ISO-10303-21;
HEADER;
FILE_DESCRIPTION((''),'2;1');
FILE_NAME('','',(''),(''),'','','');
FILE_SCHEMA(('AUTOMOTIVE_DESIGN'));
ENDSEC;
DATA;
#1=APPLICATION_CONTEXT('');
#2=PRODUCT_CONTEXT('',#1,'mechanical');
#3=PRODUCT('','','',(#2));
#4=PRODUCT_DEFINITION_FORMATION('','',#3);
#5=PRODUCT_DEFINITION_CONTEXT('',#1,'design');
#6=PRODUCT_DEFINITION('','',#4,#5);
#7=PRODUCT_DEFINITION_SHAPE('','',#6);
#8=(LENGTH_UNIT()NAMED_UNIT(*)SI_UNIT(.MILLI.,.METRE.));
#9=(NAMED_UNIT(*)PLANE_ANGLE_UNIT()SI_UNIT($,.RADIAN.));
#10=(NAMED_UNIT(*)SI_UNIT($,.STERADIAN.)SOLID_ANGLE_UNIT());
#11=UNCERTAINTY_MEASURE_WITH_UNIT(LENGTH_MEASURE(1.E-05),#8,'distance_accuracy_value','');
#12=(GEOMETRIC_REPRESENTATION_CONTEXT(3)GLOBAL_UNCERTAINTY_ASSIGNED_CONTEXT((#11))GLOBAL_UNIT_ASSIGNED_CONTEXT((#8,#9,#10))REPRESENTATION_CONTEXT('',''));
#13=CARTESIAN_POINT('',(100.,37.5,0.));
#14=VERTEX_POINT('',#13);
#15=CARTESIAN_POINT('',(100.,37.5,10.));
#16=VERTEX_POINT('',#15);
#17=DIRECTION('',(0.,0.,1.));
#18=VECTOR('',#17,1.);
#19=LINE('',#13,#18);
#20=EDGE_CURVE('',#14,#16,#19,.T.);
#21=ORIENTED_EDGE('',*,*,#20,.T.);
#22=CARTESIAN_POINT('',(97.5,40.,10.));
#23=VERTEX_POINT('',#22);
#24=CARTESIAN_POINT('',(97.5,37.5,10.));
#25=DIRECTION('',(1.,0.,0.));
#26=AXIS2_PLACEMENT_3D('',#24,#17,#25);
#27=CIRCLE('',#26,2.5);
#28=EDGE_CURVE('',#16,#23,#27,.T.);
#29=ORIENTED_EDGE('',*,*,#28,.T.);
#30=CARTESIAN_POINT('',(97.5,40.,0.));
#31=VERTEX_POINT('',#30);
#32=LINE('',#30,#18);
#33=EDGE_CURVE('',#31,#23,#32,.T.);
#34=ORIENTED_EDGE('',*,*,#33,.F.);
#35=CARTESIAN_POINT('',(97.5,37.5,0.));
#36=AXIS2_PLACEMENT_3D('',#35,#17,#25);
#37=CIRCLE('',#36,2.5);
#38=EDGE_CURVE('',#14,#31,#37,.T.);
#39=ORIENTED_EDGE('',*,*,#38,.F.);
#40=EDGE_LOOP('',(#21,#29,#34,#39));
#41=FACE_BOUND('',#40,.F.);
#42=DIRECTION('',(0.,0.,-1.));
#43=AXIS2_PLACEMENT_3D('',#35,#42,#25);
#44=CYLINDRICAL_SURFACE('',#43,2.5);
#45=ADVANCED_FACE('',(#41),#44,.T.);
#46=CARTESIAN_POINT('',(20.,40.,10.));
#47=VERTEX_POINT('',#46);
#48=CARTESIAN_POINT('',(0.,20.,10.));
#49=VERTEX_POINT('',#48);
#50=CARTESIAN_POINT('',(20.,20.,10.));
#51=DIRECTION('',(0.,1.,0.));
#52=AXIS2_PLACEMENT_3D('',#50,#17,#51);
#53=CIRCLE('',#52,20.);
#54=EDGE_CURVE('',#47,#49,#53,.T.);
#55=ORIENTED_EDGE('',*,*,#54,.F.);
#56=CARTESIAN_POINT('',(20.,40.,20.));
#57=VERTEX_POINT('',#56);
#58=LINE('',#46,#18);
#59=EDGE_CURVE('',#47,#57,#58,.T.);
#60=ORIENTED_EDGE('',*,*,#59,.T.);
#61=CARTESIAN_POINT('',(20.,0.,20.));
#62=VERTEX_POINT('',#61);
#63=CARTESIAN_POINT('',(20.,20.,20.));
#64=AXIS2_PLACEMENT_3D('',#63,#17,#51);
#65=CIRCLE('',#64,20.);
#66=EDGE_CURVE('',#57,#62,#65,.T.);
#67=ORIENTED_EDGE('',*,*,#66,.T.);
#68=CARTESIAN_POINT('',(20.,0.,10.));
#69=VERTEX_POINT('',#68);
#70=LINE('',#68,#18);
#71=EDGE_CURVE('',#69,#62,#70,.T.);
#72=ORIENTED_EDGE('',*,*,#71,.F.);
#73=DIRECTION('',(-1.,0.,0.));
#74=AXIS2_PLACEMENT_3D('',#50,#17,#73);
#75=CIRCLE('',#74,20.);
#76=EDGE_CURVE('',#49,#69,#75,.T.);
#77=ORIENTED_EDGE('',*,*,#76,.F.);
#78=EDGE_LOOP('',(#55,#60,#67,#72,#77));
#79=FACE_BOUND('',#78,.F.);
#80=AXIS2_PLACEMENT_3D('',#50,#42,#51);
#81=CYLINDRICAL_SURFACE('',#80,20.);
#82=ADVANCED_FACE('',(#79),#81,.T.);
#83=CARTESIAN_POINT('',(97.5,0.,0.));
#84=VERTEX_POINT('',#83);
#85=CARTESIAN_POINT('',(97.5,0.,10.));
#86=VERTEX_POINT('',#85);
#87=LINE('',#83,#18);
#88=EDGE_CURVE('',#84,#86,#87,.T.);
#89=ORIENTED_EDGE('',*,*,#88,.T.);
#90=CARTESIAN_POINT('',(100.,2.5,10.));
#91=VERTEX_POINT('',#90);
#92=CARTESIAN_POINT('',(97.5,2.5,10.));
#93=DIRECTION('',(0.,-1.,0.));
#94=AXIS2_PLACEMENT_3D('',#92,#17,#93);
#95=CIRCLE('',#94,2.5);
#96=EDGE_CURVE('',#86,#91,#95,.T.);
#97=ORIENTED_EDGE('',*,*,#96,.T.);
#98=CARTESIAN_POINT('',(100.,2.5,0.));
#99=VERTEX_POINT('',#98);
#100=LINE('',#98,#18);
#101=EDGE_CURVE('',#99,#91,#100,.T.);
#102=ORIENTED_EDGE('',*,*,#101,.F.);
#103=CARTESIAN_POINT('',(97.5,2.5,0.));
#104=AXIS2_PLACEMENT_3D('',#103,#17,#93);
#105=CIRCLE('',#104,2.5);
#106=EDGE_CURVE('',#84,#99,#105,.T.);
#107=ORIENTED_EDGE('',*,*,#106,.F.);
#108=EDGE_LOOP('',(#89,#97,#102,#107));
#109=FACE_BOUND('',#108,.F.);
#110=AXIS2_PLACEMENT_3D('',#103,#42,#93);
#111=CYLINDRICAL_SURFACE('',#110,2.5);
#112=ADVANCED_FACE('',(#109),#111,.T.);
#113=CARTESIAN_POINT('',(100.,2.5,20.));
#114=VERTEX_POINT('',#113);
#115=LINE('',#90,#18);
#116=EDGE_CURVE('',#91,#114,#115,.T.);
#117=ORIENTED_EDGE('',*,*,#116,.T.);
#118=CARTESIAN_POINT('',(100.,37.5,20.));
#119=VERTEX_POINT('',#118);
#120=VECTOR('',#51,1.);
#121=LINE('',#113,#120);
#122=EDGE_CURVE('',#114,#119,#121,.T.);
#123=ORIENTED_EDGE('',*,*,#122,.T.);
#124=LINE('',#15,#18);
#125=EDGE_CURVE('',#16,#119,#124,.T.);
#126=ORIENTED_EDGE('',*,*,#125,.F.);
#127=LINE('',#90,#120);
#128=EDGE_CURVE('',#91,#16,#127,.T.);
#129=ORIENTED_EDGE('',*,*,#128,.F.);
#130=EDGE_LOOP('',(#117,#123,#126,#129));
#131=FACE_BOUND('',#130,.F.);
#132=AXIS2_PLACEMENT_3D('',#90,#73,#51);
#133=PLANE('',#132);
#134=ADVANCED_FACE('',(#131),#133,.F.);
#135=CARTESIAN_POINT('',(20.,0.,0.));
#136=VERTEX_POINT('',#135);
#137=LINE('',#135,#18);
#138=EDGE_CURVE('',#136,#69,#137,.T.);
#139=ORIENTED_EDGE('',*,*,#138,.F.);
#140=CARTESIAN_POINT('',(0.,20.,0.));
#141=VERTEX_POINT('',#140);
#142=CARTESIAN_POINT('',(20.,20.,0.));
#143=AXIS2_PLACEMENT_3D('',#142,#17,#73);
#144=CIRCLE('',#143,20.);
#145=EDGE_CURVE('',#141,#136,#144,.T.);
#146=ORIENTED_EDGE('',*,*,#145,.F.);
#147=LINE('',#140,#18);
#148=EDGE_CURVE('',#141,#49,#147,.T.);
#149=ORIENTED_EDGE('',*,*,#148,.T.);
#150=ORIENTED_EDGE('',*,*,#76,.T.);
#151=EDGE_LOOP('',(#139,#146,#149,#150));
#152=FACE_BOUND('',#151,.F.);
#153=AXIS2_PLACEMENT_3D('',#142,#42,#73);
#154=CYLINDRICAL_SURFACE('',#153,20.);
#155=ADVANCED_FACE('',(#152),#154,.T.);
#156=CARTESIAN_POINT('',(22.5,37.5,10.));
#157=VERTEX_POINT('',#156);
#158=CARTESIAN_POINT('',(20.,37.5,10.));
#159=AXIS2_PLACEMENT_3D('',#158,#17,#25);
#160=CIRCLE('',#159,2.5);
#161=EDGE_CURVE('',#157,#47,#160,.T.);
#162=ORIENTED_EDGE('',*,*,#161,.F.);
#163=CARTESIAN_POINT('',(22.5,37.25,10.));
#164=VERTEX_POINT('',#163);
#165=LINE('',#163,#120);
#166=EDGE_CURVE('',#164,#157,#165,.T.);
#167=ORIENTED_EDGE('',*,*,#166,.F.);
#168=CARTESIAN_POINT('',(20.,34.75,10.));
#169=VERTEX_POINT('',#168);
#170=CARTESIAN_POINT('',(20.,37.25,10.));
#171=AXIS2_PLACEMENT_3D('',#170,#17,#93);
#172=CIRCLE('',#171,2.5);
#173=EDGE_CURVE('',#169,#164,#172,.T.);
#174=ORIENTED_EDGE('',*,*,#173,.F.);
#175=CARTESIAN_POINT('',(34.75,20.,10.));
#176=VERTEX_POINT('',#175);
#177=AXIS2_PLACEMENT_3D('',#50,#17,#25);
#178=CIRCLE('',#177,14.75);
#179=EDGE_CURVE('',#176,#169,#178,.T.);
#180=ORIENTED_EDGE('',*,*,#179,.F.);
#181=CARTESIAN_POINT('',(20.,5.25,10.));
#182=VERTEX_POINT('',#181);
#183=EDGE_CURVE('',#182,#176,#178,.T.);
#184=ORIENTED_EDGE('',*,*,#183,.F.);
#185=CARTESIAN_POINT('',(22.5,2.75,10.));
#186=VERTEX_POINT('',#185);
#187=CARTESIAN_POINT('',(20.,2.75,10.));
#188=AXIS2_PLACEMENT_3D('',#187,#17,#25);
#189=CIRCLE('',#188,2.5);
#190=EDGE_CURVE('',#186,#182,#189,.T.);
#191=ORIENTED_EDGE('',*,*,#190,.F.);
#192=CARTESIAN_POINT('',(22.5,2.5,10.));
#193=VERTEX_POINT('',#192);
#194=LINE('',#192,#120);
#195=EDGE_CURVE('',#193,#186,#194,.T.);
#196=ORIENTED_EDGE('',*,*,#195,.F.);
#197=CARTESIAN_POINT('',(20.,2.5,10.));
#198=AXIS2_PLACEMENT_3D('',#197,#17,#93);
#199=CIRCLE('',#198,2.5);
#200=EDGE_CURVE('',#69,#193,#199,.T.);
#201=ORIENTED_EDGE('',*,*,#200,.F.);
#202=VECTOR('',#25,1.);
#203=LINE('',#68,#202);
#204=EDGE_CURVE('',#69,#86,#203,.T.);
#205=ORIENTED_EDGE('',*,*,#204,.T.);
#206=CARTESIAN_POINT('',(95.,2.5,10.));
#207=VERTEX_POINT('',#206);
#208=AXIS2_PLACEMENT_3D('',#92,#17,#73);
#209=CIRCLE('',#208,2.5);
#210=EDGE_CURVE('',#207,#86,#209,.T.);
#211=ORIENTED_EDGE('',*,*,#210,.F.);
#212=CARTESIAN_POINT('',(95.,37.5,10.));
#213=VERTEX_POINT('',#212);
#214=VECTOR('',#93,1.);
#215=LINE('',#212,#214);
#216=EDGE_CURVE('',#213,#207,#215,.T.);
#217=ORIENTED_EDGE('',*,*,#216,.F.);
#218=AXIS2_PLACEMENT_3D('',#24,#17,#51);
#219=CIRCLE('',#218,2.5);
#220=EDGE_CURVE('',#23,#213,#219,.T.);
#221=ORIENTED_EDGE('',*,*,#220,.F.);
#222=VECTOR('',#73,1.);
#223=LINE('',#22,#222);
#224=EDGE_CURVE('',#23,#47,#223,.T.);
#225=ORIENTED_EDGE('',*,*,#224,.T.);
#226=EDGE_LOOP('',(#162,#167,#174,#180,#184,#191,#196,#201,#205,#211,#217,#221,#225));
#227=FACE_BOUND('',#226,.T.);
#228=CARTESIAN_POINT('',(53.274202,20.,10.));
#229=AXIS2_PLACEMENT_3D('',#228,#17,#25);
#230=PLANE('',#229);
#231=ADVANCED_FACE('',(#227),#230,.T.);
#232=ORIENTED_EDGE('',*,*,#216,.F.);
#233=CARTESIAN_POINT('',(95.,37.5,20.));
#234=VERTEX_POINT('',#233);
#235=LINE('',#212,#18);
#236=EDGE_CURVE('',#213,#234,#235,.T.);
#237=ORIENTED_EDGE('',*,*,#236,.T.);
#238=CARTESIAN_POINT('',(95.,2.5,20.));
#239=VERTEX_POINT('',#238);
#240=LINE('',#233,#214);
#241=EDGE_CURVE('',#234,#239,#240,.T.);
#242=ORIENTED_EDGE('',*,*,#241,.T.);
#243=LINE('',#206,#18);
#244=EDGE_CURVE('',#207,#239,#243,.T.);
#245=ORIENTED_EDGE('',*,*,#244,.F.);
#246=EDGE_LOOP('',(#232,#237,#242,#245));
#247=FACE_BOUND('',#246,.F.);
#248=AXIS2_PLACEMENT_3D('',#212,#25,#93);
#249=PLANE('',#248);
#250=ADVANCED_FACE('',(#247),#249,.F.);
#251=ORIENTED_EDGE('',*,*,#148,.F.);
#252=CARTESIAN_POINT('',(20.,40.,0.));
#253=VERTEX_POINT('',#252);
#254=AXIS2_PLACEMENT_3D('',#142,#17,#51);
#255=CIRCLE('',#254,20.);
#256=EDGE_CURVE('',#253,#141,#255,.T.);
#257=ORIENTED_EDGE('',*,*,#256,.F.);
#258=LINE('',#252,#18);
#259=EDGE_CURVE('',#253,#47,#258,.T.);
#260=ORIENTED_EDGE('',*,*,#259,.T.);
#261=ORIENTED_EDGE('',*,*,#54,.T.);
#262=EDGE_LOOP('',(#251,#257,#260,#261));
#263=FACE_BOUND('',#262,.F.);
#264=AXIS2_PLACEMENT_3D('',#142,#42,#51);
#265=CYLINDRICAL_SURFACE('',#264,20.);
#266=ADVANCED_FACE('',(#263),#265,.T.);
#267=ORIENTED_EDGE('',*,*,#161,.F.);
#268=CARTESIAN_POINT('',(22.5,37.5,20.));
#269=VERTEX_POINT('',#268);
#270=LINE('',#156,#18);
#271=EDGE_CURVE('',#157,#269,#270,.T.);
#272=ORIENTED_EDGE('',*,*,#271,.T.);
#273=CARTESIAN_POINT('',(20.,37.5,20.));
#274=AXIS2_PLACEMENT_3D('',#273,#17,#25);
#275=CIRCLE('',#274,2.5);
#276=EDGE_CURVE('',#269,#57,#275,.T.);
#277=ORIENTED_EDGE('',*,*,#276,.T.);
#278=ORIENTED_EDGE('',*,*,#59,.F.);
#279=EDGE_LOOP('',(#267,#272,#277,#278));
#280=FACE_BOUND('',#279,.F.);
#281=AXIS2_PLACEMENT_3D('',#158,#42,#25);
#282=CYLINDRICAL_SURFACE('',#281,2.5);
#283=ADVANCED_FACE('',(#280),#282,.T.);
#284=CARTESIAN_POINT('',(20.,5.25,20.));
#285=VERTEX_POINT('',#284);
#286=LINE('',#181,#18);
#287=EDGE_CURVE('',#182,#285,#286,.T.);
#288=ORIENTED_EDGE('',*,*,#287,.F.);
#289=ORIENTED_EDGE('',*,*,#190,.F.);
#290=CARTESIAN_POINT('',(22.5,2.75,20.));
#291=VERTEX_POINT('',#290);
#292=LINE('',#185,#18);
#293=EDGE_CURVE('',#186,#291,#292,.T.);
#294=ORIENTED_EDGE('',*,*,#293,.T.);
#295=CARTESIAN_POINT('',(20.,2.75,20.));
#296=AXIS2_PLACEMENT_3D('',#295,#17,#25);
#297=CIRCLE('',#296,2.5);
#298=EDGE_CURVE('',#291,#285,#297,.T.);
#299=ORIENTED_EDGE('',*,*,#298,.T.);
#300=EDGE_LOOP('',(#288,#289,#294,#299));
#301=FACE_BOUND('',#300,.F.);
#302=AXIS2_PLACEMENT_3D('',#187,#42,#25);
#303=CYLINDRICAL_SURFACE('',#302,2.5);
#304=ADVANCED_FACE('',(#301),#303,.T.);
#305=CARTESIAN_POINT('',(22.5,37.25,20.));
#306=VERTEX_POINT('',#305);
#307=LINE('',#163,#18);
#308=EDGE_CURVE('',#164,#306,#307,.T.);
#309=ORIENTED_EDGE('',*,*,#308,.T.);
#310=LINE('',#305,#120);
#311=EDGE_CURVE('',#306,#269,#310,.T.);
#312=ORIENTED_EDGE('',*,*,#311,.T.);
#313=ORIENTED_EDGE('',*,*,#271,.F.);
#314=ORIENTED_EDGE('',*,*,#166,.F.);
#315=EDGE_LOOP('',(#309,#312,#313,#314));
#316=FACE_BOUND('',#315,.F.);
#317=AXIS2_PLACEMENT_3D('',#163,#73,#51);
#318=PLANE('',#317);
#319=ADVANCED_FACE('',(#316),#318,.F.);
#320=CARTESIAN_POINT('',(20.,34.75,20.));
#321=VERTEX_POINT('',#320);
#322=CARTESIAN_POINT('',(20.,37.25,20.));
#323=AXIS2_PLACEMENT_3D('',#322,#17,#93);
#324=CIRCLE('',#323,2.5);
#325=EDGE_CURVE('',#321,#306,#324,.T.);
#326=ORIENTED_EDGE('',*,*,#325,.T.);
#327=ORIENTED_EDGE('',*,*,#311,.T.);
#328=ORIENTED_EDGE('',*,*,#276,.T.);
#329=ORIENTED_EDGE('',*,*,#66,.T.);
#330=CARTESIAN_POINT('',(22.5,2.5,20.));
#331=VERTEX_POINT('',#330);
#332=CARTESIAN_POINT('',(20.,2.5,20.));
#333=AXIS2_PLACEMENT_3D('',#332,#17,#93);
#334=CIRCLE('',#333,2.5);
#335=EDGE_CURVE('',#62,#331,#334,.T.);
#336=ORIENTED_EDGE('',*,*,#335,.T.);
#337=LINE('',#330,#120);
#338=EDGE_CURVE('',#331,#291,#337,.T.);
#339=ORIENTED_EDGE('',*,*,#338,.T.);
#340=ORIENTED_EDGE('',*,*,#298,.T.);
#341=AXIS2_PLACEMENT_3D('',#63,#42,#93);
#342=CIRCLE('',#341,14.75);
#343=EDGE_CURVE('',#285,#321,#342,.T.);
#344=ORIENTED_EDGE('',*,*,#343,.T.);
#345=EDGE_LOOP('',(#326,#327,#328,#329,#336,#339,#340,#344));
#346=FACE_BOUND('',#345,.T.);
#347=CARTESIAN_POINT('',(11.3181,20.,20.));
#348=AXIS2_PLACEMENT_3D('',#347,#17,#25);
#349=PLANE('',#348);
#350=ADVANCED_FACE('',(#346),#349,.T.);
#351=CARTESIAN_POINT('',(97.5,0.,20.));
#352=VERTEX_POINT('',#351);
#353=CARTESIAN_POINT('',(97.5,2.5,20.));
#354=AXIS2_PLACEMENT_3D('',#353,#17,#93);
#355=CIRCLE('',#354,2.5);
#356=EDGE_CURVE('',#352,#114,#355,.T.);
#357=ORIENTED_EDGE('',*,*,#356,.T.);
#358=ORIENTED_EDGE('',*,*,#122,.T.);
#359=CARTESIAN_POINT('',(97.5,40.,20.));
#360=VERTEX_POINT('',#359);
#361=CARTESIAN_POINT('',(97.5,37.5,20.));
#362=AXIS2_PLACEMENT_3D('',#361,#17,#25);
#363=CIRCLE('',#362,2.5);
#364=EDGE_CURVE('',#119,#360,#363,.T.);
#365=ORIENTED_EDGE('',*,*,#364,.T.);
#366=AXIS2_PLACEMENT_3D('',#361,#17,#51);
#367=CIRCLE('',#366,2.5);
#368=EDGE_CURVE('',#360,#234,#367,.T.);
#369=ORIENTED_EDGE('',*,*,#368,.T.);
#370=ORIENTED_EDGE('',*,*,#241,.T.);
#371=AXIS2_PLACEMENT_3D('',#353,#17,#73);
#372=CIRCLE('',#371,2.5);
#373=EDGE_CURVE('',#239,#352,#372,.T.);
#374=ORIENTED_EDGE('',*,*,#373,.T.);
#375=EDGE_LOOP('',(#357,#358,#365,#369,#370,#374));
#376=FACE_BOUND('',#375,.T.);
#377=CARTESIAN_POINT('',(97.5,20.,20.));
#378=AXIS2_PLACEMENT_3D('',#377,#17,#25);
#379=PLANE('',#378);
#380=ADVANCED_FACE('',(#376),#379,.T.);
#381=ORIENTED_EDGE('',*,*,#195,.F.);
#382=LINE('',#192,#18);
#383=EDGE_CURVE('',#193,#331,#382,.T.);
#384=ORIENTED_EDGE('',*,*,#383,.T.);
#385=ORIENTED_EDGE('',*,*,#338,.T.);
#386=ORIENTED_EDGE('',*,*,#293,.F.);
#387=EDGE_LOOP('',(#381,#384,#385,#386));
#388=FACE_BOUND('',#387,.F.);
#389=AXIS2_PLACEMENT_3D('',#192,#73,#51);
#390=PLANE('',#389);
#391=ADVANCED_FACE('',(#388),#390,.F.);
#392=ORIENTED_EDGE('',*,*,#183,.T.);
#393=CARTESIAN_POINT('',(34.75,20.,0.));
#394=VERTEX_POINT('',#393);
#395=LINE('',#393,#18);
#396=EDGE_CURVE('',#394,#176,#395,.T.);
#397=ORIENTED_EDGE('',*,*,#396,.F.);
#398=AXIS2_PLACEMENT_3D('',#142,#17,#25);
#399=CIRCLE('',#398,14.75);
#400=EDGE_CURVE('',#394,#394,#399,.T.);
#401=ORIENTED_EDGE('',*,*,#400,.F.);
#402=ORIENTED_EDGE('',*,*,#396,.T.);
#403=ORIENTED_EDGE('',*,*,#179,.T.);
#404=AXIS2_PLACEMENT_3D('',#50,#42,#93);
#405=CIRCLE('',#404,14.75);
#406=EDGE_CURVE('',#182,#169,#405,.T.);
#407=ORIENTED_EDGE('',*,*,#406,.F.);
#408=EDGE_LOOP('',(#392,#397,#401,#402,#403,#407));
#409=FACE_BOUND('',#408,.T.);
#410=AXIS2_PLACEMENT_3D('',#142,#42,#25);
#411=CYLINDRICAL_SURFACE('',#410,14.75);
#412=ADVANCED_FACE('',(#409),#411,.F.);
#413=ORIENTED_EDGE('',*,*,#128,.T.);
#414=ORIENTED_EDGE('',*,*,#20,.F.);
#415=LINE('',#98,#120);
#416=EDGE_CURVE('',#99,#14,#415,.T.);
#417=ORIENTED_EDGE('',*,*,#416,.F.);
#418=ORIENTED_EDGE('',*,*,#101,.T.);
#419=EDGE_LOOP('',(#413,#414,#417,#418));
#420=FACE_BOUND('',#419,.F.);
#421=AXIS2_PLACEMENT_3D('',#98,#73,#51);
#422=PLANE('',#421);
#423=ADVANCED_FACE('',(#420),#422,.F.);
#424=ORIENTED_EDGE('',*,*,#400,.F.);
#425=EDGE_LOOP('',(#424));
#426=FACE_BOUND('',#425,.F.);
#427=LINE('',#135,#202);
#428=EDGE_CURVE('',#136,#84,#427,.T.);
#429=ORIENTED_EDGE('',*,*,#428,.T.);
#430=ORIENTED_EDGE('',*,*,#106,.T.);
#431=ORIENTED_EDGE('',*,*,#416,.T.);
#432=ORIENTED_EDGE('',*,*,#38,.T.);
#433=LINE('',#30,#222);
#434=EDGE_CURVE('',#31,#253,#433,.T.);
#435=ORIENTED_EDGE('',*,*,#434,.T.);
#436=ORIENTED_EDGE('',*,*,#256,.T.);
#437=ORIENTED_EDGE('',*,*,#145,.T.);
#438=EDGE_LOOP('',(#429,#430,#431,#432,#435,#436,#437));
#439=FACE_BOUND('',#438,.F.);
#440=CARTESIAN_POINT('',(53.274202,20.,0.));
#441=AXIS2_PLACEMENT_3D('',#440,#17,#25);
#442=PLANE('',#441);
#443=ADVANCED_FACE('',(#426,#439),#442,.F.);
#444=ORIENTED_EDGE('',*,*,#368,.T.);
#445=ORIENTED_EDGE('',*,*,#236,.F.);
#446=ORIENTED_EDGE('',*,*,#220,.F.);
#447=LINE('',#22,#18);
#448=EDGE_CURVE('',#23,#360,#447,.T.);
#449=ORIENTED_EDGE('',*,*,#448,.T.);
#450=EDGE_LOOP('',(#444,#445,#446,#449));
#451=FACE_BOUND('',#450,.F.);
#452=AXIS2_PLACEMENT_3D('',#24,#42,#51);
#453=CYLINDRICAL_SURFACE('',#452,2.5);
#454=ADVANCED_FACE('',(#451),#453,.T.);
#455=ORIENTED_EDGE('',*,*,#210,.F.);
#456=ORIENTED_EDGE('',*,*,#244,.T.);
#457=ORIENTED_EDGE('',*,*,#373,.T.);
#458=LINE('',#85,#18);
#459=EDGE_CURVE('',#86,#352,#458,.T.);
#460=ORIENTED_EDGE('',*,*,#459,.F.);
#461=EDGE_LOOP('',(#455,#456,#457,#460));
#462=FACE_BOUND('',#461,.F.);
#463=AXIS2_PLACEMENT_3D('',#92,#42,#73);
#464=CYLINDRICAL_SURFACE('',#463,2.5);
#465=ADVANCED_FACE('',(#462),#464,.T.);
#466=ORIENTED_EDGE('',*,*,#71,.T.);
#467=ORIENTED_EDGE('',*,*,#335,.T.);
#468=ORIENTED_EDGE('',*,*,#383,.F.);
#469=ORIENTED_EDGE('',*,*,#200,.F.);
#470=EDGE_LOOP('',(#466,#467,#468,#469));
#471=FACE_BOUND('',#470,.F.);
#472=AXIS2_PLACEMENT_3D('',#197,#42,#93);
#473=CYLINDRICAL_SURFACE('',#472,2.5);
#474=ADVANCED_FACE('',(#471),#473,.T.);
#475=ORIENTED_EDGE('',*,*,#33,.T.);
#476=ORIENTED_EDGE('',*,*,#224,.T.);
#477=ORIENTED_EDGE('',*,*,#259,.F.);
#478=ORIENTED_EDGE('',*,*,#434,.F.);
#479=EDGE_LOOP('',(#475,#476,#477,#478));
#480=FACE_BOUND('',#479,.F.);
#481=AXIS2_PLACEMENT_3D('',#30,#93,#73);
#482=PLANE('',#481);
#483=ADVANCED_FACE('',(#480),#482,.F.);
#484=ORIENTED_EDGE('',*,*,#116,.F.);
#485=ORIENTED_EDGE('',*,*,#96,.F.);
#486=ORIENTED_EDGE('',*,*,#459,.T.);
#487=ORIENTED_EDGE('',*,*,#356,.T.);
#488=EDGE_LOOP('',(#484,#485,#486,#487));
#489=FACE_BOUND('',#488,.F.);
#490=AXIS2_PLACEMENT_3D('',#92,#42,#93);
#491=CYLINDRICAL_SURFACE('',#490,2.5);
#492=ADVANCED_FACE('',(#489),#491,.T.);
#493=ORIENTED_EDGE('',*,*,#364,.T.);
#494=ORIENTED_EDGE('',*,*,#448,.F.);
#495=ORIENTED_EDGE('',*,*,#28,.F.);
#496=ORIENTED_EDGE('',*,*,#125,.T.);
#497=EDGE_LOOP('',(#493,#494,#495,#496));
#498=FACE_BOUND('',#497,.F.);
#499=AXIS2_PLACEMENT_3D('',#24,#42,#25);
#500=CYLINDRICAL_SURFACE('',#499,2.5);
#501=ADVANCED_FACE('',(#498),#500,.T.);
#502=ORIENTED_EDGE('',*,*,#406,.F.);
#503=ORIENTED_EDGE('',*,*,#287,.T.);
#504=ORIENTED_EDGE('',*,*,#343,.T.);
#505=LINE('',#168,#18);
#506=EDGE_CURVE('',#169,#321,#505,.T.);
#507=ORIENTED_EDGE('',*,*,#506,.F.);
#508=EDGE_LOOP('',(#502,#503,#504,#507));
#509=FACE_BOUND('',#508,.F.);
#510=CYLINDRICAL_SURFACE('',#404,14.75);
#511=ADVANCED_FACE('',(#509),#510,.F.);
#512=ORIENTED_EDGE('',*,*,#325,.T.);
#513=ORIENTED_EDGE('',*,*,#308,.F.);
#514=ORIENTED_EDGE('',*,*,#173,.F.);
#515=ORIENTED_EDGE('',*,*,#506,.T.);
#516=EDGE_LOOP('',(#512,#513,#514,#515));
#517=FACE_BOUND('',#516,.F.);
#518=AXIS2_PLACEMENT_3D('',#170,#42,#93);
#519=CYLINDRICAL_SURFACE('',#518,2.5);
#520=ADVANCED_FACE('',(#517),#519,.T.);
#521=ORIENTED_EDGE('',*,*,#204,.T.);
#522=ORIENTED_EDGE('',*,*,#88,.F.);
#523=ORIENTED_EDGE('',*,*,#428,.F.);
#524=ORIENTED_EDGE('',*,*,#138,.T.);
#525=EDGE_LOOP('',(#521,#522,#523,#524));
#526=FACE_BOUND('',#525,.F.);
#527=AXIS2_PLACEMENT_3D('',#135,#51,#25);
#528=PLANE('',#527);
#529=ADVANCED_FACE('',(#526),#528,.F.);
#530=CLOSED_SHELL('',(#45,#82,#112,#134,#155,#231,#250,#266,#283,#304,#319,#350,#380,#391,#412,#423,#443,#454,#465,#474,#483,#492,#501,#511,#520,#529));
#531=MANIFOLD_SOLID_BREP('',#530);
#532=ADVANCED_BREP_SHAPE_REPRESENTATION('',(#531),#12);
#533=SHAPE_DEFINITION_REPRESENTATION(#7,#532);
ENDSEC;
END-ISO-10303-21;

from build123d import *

# Parameters (mm, degrees)
F0_R     = 14.75
F1_DEPTH = 10
F3_DEPTH = 10


# Not quite as in the source:
# - a feature names something its author has since deleted; it is built from what else it names


with BuildPart() as f1:
    # F0 (on Top) → F1 (new body)
    with BuildSketch(Plane.XY):
        with BuildLine():
            ThreePointArc((0, 20), (5.8578643763, 5.8578643763), (20, 0))
            Line((20, 0), (97.5, 0))
            ThreePointArc((97.5, 0), (99.267766953, 0.732233047), (100, 2.5))
            Line((100, 2.5), (100, 37.5))
            ThreePointArc((100, 37.5), (99.267766953, 39.267766953), (97.5, 40))
            Line((97.5, 40), (20, 40))
            ThreePointArc((20, 40), (5.8578643763, 34.1421356237), (0, 20))
        make_face()
        with Locations((20, 20)):
            Circle(F0_R, mode=Mode.SUBTRACT)
    extrude(amount=F1_DEPTH)

    # F2 (on face) → F3 (join)
    with BuildSketch(Plane.XY.offset(10)):
        with BuildLine():
            ThreePointArc((22.5, 37.5), (21.767766953, 39.267766953), (20, 40))
            ThreePointArc((20, 40), (0, 20), (20, 0))
            ThreePointArc((20, 0), (21.767766953, 0.732233047), (22.5, 2.5))
            Line((22.5, 2.5), (22.5, 2.75))
            ThreePointArc((22.5, 2.75), (21.767766953, 4.517766953), (20, 5.25))
            ThreePointArc((20, 5.25), (5.25, 20), (20, 34.75))
            ThreePointArc((20, 34.75), (21.767766953, 35.482233047), (22.5, 37.25))
            Line((22.5, 37.25), (22.5, 37.5))
        make_face()
        with BuildLine():
            ThreePointArc((100, 37.5), (99.267766953, 39.267766953), (97.5, 40))
            ThreePointArc((97.5, 40), (95.732233047, 39.267766953), (95, 37.5))
            Line((95, 37.5), (95, 2.5))
            ThreePointArc((95, 2.5), (95.732233047, 0.732233047), (97.5, 0))
            ThreePointArc((97.5, 0), (99.267766953, 0.732233047), (100, 2.5))
            Line((100, 2.5), (100, 37.5))
        make_face()
    extrude(amount=F3_DEPTH)


solid = f1.part
